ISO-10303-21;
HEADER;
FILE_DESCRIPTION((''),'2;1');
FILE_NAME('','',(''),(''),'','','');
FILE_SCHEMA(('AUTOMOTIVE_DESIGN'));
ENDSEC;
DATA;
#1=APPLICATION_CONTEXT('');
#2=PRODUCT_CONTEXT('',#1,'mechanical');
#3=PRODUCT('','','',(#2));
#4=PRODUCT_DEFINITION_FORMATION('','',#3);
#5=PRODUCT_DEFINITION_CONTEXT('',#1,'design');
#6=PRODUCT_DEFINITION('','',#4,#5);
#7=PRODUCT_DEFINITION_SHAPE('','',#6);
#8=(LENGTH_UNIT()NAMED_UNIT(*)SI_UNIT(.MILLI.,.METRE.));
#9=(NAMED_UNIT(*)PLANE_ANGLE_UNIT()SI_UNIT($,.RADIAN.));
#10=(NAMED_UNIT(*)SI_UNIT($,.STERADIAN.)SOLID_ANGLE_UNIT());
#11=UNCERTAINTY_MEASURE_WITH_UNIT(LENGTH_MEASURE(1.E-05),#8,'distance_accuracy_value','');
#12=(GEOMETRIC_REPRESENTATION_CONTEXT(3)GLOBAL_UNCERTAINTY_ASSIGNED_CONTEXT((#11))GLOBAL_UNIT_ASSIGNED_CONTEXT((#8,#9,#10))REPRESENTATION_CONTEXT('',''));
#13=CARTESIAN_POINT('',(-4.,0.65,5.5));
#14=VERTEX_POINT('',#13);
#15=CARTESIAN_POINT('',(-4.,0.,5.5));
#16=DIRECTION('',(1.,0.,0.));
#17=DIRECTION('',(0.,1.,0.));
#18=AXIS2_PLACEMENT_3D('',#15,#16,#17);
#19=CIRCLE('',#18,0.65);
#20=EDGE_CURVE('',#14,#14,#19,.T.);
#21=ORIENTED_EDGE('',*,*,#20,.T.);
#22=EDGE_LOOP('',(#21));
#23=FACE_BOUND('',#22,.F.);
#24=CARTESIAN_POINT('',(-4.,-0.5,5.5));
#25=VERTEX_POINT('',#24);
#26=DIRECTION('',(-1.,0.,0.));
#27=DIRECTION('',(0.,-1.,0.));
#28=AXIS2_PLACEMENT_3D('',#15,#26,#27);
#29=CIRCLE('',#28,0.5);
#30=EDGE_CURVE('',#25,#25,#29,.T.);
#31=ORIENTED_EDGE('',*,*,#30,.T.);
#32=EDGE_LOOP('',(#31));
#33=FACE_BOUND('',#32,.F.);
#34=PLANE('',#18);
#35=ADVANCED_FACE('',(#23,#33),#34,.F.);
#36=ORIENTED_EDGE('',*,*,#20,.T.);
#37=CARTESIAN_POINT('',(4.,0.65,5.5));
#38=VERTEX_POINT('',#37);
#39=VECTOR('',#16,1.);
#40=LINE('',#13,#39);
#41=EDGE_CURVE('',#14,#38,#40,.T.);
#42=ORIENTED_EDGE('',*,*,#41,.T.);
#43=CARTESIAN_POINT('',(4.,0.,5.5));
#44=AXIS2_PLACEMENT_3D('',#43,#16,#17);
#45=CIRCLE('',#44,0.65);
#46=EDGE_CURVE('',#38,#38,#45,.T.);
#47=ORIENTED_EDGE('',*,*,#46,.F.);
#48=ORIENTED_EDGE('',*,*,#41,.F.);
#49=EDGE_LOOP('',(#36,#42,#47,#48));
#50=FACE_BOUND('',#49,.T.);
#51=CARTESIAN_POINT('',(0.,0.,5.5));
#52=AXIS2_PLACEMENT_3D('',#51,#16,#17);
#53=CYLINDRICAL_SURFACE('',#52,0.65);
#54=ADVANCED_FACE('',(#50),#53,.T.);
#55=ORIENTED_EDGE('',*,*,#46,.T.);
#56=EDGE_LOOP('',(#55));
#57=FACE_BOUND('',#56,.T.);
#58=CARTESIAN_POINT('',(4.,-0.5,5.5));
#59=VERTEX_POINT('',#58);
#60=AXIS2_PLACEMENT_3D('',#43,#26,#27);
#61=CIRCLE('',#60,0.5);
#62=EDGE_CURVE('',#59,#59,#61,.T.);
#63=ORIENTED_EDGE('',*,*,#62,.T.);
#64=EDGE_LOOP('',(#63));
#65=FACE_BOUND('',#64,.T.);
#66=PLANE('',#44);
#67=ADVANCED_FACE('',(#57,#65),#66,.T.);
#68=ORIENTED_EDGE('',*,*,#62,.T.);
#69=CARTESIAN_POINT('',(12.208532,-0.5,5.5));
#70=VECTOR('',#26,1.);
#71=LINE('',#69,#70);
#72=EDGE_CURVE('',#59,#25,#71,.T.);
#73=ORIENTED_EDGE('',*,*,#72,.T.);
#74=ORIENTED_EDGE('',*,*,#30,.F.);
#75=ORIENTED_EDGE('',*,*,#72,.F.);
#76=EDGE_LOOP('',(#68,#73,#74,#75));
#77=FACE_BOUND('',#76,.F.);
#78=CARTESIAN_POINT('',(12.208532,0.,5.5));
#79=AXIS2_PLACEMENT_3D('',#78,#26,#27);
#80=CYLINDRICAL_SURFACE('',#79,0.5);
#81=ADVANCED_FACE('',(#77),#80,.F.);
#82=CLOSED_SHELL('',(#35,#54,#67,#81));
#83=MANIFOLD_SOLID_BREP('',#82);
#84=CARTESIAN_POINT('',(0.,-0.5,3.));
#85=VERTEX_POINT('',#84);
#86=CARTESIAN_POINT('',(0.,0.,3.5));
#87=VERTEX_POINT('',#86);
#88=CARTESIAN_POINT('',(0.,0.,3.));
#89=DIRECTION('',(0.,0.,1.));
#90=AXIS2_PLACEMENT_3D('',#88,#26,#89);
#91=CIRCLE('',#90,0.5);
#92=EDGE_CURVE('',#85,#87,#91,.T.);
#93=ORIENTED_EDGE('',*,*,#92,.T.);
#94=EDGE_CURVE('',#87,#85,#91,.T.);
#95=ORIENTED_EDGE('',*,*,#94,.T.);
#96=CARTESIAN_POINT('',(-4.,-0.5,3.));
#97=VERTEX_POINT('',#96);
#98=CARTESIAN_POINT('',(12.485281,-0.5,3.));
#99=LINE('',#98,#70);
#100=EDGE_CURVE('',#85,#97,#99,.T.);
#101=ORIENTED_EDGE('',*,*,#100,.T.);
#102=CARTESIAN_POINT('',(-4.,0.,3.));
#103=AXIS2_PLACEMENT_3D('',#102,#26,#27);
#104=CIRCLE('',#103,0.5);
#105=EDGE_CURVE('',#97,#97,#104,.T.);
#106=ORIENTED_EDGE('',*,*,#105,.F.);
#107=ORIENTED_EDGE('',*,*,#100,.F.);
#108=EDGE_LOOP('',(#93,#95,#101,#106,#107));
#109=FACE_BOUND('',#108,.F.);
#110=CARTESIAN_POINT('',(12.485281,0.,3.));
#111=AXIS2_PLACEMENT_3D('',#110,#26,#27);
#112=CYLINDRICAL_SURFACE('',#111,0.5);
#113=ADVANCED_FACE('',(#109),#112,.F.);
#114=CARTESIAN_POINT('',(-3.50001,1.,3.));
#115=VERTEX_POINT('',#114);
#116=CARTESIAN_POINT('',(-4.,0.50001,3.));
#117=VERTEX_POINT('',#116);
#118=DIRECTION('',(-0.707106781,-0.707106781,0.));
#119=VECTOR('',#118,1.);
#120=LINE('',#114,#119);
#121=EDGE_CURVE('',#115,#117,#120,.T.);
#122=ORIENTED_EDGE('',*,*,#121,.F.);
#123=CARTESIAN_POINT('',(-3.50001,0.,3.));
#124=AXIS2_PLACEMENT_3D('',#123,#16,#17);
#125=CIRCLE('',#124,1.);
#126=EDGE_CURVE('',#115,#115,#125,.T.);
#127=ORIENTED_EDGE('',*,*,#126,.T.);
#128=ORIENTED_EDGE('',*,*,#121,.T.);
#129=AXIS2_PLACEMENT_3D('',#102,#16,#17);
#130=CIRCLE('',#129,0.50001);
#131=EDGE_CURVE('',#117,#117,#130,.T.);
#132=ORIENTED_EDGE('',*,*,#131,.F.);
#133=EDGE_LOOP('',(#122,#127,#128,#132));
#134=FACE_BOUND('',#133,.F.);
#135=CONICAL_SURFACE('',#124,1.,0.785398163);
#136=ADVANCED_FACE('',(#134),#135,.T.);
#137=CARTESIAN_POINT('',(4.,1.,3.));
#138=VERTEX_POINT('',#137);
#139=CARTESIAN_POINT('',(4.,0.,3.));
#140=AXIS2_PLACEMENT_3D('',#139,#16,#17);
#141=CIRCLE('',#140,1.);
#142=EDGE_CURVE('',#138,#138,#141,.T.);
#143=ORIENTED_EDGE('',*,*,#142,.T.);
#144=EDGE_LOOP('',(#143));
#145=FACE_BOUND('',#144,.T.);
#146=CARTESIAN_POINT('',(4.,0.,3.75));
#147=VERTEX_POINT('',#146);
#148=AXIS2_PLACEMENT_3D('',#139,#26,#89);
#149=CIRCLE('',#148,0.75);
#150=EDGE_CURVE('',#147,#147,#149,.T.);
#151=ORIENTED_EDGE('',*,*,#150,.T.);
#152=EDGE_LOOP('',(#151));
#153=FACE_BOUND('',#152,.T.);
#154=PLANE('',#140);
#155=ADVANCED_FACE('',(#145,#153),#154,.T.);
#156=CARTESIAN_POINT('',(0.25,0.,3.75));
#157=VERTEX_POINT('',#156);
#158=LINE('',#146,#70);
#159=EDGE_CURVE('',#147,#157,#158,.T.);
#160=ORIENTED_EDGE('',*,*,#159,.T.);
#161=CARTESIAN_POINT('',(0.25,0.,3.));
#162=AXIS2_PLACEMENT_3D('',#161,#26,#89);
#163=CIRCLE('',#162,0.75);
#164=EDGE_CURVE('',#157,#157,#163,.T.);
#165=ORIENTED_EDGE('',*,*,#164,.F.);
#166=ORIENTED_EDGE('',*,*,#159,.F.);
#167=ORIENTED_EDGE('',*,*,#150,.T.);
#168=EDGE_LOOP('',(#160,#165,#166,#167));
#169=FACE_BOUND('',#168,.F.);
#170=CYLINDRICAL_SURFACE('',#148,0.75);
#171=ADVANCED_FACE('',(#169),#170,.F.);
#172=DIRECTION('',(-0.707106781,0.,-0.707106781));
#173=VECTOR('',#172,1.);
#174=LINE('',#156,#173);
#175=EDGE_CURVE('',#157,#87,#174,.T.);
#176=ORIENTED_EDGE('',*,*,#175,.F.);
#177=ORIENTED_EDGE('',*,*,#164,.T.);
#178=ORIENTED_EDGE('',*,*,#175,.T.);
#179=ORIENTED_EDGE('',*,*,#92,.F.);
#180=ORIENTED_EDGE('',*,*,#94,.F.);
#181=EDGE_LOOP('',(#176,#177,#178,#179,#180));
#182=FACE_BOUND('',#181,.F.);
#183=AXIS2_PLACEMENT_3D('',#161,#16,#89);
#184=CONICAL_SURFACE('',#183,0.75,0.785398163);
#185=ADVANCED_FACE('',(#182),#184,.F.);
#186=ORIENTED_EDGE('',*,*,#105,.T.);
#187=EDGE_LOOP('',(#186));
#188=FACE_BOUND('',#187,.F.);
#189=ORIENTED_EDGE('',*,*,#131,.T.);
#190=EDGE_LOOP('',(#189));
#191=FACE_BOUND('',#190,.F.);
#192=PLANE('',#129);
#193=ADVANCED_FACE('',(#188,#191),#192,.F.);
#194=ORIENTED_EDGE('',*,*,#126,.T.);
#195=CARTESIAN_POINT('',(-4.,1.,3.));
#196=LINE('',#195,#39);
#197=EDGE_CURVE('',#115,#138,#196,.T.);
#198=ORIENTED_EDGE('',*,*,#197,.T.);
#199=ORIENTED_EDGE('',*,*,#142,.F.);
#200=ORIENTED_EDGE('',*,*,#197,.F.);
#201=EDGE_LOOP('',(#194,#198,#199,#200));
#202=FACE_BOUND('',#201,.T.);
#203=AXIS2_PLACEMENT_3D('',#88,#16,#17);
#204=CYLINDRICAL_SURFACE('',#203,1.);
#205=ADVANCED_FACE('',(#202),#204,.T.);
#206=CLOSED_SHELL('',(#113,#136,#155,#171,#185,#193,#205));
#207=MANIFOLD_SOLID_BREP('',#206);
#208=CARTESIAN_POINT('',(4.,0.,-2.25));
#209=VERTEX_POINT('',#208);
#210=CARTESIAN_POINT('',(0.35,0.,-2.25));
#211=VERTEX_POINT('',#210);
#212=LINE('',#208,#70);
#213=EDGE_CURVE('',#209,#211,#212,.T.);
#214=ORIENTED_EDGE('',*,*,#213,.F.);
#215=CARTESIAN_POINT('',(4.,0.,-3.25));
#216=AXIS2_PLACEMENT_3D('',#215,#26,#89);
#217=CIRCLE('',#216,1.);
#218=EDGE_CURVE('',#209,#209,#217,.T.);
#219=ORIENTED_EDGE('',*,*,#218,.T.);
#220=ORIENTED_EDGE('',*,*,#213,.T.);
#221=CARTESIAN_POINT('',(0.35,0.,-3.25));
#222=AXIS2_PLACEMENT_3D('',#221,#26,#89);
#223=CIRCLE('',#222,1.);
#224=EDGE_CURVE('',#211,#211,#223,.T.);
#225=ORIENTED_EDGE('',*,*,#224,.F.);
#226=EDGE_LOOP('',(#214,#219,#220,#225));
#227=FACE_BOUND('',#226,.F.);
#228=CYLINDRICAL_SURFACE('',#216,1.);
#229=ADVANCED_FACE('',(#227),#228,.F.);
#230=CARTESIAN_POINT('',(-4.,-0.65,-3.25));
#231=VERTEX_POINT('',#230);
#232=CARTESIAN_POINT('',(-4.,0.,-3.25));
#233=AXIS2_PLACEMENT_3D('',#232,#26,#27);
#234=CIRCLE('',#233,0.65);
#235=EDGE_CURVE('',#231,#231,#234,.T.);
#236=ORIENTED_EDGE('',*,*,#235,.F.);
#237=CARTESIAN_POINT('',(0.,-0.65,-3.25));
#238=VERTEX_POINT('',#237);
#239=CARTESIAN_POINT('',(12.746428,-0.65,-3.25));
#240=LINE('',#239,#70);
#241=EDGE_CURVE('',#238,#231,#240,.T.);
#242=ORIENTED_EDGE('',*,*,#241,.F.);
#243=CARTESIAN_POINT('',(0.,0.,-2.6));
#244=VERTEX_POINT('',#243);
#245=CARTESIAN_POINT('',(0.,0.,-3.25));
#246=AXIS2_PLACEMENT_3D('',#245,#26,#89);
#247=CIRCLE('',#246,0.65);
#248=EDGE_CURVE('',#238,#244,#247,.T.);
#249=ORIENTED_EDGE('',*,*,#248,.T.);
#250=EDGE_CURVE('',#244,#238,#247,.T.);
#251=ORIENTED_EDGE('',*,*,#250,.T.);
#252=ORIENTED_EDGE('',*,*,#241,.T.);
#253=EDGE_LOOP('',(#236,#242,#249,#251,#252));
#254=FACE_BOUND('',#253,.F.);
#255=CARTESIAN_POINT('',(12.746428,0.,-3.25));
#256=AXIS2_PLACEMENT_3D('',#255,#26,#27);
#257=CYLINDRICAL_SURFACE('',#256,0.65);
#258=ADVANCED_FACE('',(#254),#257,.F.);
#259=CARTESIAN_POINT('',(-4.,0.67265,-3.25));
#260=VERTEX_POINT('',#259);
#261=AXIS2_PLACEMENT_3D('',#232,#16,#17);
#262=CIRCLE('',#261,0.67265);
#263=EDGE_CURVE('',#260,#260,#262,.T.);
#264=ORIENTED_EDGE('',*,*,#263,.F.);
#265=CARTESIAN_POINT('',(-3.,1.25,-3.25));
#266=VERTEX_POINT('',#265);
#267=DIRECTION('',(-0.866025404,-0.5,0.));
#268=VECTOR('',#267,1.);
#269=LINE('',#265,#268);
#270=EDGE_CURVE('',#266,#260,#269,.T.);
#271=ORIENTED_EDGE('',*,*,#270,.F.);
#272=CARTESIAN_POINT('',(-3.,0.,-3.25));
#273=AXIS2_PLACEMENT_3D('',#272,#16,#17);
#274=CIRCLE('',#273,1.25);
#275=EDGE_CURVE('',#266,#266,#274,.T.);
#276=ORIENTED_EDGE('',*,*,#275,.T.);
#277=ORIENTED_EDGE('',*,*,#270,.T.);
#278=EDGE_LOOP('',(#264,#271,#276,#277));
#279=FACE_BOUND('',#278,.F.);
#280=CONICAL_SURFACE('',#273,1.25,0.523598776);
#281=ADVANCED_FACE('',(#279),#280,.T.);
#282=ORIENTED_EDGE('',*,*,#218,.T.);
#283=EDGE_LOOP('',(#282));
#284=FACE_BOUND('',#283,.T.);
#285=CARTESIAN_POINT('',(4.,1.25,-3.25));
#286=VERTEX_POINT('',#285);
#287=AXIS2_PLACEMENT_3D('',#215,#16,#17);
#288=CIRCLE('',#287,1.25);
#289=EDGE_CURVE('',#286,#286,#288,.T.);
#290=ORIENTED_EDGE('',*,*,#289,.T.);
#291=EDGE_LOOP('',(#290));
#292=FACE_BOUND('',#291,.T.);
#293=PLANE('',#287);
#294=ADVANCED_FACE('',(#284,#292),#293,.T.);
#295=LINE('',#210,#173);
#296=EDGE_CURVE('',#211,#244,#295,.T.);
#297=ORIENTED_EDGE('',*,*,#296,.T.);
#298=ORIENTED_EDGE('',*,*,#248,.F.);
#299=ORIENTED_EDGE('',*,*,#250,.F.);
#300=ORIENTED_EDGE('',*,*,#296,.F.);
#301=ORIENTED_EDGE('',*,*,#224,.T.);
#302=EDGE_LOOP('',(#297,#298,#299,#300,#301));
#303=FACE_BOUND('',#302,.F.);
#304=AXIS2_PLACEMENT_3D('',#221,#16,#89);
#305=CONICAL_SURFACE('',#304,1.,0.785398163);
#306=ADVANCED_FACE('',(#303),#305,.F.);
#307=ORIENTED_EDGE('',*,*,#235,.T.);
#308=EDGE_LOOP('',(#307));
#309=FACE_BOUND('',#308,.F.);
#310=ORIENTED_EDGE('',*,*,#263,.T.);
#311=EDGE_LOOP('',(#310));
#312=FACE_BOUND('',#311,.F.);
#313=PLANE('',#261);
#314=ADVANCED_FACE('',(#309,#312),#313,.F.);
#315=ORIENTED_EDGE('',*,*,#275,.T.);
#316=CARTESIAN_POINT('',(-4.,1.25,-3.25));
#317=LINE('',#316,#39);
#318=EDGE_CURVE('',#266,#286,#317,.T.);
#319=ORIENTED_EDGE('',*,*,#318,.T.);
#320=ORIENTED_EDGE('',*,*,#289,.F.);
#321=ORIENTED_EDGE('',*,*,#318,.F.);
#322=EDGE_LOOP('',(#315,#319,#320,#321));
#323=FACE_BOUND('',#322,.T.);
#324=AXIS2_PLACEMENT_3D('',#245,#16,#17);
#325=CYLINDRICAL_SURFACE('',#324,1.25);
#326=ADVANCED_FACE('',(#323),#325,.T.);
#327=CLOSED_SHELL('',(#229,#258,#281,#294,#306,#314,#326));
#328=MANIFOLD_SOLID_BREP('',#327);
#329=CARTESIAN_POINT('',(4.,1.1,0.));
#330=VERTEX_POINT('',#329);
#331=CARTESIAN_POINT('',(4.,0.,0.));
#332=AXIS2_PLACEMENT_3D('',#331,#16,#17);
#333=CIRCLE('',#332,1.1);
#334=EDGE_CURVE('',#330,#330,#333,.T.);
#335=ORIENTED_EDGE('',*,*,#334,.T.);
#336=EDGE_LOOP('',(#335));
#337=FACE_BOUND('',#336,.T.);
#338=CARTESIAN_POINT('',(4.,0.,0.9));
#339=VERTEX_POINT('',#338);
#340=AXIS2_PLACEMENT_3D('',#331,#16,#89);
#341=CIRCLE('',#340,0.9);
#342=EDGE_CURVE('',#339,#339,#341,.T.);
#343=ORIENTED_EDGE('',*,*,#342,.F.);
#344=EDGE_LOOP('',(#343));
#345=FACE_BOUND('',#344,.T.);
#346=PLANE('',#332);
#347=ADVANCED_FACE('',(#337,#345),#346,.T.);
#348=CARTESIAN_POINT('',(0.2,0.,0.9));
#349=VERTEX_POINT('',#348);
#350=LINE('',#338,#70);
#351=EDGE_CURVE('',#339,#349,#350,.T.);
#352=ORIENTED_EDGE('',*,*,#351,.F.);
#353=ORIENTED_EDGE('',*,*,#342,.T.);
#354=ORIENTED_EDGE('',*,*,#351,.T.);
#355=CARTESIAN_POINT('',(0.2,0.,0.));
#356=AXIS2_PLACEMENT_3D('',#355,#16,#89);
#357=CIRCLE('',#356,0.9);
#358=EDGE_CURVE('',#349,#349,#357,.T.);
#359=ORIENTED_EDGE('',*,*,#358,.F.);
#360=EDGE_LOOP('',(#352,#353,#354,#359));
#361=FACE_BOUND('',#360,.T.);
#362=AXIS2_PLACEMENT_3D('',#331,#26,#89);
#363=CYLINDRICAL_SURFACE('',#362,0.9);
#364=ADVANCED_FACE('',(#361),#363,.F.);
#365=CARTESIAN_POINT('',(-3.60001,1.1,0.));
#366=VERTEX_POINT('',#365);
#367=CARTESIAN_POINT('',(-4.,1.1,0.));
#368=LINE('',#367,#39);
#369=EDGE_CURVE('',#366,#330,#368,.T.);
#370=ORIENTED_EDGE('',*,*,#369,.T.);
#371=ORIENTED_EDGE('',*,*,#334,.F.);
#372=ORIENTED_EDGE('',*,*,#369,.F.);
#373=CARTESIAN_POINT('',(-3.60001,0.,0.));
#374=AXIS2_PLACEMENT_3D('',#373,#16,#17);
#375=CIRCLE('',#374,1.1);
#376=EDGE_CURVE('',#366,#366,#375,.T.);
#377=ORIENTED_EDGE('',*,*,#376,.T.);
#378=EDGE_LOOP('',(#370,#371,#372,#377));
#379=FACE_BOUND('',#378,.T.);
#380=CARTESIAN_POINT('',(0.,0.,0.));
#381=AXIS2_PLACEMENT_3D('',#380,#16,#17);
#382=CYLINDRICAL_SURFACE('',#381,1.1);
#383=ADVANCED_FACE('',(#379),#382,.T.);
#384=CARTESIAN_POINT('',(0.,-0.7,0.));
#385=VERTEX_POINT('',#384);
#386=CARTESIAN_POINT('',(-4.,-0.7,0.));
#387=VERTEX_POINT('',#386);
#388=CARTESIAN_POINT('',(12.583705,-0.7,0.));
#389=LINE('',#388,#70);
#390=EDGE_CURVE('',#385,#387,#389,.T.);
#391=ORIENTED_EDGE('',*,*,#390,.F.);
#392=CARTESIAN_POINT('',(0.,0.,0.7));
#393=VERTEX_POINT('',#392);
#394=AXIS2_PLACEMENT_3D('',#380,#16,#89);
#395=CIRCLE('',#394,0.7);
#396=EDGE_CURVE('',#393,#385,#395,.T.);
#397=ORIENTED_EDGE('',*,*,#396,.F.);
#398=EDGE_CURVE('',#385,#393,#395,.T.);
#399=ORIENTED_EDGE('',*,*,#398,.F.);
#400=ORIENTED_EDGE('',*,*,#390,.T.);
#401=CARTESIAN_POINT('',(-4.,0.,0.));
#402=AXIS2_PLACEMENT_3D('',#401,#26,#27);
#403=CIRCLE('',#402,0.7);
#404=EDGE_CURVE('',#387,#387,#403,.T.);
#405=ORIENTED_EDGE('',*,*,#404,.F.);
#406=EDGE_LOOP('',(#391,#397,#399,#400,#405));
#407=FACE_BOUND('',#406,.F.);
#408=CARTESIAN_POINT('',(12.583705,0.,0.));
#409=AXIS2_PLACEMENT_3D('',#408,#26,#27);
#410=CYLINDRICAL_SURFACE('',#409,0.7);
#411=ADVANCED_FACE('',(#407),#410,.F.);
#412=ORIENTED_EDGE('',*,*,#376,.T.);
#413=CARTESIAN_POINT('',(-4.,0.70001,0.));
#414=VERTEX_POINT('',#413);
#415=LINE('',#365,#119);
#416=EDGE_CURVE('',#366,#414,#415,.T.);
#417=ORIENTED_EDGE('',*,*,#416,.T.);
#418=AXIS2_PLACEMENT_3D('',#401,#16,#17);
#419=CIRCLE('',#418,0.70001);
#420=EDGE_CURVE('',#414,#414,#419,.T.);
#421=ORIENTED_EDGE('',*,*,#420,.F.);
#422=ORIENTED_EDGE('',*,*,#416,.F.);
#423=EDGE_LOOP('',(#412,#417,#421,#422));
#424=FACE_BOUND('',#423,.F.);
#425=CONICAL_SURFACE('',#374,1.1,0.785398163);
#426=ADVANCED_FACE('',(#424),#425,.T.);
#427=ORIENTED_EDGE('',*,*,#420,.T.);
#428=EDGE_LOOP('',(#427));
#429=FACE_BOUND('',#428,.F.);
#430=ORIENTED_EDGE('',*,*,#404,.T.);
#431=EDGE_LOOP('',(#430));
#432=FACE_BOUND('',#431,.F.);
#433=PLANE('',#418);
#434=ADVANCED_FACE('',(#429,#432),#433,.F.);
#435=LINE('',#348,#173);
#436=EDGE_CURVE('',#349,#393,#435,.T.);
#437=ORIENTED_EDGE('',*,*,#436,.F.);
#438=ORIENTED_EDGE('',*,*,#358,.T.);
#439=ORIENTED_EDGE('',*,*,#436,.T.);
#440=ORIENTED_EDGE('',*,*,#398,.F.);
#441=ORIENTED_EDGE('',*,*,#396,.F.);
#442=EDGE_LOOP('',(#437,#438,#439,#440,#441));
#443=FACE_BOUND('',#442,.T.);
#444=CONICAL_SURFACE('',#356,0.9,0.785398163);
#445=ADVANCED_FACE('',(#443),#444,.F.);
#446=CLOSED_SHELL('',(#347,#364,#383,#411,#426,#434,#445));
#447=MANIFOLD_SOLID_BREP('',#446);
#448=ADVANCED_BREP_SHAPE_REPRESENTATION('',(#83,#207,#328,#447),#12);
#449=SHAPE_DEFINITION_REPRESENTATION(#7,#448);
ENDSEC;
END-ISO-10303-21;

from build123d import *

# Parameters (mm, degrees)
F0_R     = 1.1
F1_DEPTH = 4
F0_R_2   = 1
F0_R_3   = 1.25
F0_R_4   = 0.65
F3_D     = 1
F4_D     = 1.3
F5_D     = 1.4
F6_D     = 1
F7_SIZE2 = 0.39999
F7_SIZE  = 0.39999
F8_SIZE2 = 0.49999
F8_SIZE  = 0.49999
F9_SIZE2 = 0.5773502692
F9_SIZE  = 1


# Not quite as in the source:
# - a fillet or chamfer is up to 0.001 mm smaller than in the source, because OpenCascade refuses the exact size


with BuildPart() as f1:
    # F0 (on Right) → F1 (new body, symmetric)
    with BuildSketch(Plane.YZ):
        Circle(F0_R)
    extrude(amount=F1_DEPTH, both=True)

    # F5 (through all)
    with Locations(Plane.YZ.offset(4)):
        with Locations((0, 0)):
            Hole(F5_D / 2)

    # F7 (size 0.4 and 0.4 in the source; OpenCascade refuses exactly that, so slightly less here)
    f7_edges = [f1.edges().sort_by_distance(p)[0] for p in [
        (-4, -1.1, 0),
    ]]
    chamfer(f7_edges, length=F7_SIZE, length2=F7_SIZE2)

    # F12 (on Front) → F13 (revolve, cut)
    with BuildSketch(Plane.XZ):
        Polygon((0, 0.7), (0, 0), (4, 0), (4, 0.9), (0.2, 0.9), align=None)
    revolve(axis=Axis((2, 0, 0), (1, 0, 0)), mode=Mode.SUBTRACT)


with BuildPart() as f1b:
    # F0 (on Right) → F1, piece 2 (new body, symmetric)
    with BuildSketch(Plane.YZ):
        with Locations((0, 3)):
            Circle(F0_R_2)
    extrude(amount=F1_DEPTH, both=True)

    # F6 (through all)
    with Locations(Plane.YZ.offset(4)):
        with Locations((0, 3)):
            Hole(F6_D / 2)

    # F8 (size 0.5 and 0.5 in the source; OpenCascade refuses exactly that, so slightly less here)
    f8_edges = [f1b.edges().sort_by_distance(p)[0] for p in [
        (-4, -1, 3),
    ]]
    chamfer(f8_edges, length=F8_SIZE, length2=F8_SIZE2)

    # F14 (on Front) → F15 (revolve, cut)
    with BuildSketch(Plane.XZ):
        Polygon((0, 3), (4, 3), (4, 3.75), (0.25, 3.75), (0, 3.5), align=None)
    revolve(axis=Axis((2, 0, 3), (-1, 0, 0)), mode=Mode.SUBTRACT)


with BuildPart() as f1c:
    # F0 (on Right) → F1, piece 3 (new body, symmetric)
    with BuildSketch(Plane.YZ):
        with Locations((0, -3.25)):
            Circle(F0_R_3)
    extrude(amount=F1_DEPTH, both=True)

    # F4 (through all)
    with Locations(Plane.YZ.offset(4)):
        with Locations((0, -3.25)):
            Hole(F4_D / 2)

    # F9
    f9_edges = [f1c.edges().sort_by_distance(p)[0] for p in [
        (-4, -1.25, -3.25),
    ]]
    f9_side = f1c.faces().sort_by_distance((0, -1.25, -3.25))[0]
    chamfer(f9_edges, length=F9_SIZE, length2=F9_SIZE2, reference=f9_side)

    # F10 (on Front) → F11 (revolve, cut)
    with BuildSketch(Plane.XZ):
        Polygon((4, -3.25), (4, -2.25), (0.35, -2.25), (0, -2.6), (0, -3.25), align=None)
    revolve(axis=Axis((2, 0, -3.25), (-1, 0, 0)), mode=Mode.SUBTRACT)


with BuildPart() as f1d:
    # F0 (on Right) → F1, piece 4 (new body, symmetric)
    with BuildSketch(Plane.YZ):
        with Locations((0, 5.5)):
            Circle(F0_R_4)
    extrude(amount=F1_DEPTH, both=True)

    # F3 (through all)
    with Locations(Plane.YZ.offset(4)):
        with Locations((0, 5.5)):
            Hole(F3_D / 2)


solid = Compound([f1.part, f1b.part, f1c.part, f1d.part])
